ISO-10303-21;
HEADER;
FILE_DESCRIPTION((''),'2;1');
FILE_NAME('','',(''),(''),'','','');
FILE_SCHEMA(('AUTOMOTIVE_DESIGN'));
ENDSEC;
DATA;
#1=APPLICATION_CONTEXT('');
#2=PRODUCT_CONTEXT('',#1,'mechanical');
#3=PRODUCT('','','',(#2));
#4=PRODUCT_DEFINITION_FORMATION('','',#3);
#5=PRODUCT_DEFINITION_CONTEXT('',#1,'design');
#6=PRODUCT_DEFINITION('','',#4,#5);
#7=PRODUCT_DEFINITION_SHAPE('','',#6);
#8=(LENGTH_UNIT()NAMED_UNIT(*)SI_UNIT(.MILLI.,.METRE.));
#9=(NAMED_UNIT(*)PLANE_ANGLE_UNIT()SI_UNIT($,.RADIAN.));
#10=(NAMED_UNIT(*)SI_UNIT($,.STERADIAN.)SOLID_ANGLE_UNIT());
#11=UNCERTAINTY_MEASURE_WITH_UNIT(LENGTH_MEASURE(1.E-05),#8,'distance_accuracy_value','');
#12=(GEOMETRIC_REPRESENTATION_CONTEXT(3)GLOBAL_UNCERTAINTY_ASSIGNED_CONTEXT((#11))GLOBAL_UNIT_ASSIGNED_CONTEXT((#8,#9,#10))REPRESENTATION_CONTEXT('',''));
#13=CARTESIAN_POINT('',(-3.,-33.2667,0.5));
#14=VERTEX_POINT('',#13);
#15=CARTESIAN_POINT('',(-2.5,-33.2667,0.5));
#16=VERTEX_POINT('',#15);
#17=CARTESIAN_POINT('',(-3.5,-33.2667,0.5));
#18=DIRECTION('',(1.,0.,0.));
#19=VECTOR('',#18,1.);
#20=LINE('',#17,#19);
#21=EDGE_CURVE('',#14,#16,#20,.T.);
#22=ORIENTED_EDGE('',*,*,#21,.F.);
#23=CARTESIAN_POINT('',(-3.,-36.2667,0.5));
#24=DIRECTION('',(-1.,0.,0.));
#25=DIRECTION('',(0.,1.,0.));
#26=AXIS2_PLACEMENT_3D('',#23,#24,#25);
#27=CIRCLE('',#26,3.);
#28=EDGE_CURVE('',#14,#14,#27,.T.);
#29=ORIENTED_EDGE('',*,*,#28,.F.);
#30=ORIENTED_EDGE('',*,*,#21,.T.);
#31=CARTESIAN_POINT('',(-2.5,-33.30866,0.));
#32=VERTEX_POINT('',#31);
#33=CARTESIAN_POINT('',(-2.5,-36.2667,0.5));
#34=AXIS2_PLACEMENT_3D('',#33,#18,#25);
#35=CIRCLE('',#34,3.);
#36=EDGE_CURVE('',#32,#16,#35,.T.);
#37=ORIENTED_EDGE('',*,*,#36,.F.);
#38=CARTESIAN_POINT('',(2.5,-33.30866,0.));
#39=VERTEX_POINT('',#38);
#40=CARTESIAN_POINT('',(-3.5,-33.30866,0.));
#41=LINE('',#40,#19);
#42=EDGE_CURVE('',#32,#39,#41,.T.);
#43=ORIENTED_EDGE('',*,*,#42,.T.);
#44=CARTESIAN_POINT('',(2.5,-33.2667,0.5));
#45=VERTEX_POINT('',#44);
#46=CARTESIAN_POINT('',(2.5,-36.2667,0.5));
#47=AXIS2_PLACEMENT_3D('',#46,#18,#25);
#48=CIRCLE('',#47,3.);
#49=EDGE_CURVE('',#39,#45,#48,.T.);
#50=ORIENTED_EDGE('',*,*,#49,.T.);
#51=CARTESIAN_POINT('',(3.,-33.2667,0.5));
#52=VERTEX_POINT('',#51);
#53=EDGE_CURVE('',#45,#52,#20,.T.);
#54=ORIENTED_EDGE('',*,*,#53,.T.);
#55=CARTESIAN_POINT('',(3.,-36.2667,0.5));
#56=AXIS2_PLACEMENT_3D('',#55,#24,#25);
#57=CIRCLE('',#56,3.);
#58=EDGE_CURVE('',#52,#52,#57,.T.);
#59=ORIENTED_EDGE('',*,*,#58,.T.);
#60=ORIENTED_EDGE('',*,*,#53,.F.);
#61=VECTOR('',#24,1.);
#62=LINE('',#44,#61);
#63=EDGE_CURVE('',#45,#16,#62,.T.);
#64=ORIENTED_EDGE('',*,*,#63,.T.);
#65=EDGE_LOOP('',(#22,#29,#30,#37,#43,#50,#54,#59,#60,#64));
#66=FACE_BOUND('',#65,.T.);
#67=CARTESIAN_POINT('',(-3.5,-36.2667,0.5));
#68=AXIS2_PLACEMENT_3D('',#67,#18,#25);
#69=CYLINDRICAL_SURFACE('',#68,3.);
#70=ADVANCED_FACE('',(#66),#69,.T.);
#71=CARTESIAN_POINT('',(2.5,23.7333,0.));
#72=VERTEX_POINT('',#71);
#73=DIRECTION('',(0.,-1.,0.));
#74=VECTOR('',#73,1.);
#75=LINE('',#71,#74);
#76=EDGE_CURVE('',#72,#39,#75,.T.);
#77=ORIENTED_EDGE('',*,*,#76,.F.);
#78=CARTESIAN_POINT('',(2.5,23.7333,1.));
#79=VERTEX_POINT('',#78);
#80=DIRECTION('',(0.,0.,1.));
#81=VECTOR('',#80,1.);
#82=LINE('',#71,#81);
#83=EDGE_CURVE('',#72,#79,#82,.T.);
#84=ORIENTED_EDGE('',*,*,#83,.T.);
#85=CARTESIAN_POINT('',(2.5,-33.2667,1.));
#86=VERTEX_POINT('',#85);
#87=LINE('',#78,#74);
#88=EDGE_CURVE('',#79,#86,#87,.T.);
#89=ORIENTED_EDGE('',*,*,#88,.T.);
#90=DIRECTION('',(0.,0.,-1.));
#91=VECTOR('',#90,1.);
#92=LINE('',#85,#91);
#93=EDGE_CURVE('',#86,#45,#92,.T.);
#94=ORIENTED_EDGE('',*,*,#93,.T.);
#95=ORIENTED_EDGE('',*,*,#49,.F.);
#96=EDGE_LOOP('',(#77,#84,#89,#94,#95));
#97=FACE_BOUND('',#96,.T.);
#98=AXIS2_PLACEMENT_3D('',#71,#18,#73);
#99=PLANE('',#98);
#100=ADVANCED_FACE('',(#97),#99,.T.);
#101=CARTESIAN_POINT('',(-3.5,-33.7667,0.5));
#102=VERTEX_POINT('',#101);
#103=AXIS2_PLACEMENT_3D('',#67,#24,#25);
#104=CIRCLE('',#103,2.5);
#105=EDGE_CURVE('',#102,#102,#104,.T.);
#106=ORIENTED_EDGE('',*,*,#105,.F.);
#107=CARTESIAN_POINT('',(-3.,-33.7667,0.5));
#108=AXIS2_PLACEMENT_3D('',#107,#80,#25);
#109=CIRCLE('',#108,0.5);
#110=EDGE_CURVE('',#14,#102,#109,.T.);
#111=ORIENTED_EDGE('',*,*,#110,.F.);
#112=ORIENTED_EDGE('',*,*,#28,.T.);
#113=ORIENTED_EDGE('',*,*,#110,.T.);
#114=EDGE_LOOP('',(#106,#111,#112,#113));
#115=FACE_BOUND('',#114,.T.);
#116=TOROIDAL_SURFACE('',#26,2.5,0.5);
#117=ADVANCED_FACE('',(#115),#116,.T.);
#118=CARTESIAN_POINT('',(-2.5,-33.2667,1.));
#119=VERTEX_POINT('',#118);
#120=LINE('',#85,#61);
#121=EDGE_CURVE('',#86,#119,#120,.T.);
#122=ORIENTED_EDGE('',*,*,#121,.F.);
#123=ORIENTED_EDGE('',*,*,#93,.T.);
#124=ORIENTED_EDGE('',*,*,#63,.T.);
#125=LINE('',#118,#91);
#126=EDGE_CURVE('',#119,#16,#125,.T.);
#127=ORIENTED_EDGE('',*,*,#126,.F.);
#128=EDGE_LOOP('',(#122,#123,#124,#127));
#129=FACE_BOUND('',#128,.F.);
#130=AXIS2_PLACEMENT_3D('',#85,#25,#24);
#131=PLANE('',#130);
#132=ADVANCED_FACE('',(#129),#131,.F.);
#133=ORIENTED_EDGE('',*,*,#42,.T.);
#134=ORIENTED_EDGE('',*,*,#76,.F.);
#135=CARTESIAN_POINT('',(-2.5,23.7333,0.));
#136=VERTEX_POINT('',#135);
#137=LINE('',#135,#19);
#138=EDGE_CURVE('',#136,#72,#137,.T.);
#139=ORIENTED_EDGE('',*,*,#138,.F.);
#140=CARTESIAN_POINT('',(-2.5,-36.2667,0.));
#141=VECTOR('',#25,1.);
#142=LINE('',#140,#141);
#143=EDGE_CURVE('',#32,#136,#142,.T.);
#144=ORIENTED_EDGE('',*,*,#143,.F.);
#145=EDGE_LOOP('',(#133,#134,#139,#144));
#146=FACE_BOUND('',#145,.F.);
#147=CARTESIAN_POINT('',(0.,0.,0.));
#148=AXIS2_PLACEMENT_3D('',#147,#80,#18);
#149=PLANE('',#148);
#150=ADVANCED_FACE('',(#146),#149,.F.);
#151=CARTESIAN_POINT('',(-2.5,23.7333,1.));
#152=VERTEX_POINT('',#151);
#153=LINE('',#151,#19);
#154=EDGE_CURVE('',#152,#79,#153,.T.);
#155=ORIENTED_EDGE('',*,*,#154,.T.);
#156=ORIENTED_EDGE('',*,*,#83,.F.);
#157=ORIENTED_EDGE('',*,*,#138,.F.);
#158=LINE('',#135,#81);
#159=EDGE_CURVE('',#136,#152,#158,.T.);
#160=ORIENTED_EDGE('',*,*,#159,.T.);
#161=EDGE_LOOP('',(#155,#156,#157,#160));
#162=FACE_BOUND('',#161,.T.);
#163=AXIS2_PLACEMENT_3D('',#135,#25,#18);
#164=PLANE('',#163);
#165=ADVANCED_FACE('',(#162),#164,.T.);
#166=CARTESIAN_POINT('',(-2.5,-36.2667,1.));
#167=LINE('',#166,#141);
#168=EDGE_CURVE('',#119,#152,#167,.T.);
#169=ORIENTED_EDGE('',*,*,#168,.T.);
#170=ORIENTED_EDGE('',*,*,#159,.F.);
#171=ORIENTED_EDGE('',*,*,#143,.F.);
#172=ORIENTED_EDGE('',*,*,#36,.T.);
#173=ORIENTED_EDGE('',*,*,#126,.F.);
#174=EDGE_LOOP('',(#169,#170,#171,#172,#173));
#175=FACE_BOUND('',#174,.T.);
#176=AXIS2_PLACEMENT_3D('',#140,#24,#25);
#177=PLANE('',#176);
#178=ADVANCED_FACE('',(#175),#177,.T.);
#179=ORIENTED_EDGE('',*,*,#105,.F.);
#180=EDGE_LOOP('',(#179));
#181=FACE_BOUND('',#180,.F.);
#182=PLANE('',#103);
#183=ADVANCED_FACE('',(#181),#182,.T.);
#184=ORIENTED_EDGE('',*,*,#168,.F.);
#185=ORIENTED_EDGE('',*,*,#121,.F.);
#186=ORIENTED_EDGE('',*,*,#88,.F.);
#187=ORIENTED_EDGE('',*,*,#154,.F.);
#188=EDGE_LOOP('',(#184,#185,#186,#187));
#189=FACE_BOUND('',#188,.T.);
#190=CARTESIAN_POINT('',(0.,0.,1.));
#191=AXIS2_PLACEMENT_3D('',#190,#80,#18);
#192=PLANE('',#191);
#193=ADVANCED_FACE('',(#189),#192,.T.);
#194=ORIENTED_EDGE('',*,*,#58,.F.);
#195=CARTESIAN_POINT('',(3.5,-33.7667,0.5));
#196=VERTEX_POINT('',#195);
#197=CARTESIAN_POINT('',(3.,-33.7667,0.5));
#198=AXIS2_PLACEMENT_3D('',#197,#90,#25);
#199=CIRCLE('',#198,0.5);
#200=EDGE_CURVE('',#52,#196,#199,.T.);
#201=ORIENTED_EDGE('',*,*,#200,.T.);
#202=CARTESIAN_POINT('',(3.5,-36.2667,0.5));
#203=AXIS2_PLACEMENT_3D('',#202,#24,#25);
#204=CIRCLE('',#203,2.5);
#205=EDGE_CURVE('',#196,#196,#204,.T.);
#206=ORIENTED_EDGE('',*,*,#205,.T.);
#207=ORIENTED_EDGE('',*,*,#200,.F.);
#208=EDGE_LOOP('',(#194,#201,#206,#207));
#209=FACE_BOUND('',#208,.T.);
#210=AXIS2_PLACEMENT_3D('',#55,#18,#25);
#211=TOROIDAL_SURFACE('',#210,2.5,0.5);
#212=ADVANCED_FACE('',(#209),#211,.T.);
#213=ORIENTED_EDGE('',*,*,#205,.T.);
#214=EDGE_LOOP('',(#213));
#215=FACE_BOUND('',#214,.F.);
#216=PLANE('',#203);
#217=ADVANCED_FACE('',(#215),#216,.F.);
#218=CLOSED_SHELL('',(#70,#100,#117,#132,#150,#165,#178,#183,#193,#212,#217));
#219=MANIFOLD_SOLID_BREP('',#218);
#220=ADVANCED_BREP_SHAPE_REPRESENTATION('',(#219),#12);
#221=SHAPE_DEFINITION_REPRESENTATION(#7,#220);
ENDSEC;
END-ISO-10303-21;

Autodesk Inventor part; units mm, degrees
ref_plane "YZ Plane" through (0, 0, 0) normal (1, 0, 0) x (0, 1, 0)
ref_plane "XZ Plane" through (0, 0, 0) normal (0, 1, 0) x (-1, 0, 0)
ref_plane "XY Plane" through (0, 0, 0) normal (0, 0, 1) x (1, 0, 0)
sketch "スケッチ1" plane through (0, 0, 0) normal (0, 0, 1) x (1, 0, 0)
  line L0 (-2.5, 23.7333) -> (2.5, 23.7333)
  line L1 (2.5, 23.7333) -> (2.5, -36.2667)
  line L2 (2.5, -36.2667) -> (-2.5, -36.2667)
  line L3 (-2.5, -36.2667) -> (-2.5, 23.7333)
  point P0 (0, 0)
  dimension "d0" = 5
  dimension "d1" = 2.5
  dimension "d2" = 60
extrude "押し出し1" add sketch "スケッチ1" along normal blind 1
sketch "スケッチ2" plane through (0, 0, 1) normal (0, 0, 1) x (1, 0, 0)
  line L0 (2.5, 23.7333) -> (2.5, -36.2667) projected
  line L1 (-2.5, -36.2667) -> (2.5, -36.2667)
  line L2 (2.5, -36.2667) -> (2.5, -33.2667)
  line L3 (2.5, -33.2667) -> (-2.5, -33.2667)
  line L4 (-2.5, -33.2667) -> (-2.5, -36.2667)
  point P0 (0, 0)
  dimension "d5" = 3
extrude "押し出し2" cut sketch "スケッチ2" against normal blind 0.5
sketch "スケッチ4" plane through (0, 0, 0.5) normal (0, 0, 1) x (1, 0, 0)
  line L0 (2.5, -33.2667) -> (2.5, -36.2667) projected
  line L1 (2.5, -36.2667) -> (-2.5, -36.2667) projected
  line L2 (-3.5, -33.2667) -> (3.5, -33.2667)
  line L3 (3.5, -33.2667) -> (3.5, -36.2667)
  line L4 (3.5, -36.2667) -> (-3.5, -36.2667)
  line L5 (-3.5, -36.2667) -> (-3.5, -33.2667)
  point P0 (0, 0)
  dimension "d9" = 7
  dimension "d10" = 1
revolve "回転2" add sketch "スケッチ4" angle 360 about axis through (2.5, -36.2667, 0.5) along (-1, 0, 0)
fillet "フィレット1" radius 0.5 2 edges at (-3.5, -39.2667, 0.5) (3.5, -39.2667, 0.5)
equation "\"d1\" = 0.5 * d0"
properties part number "JointD2_2nd" material "アルミニウム 6061"
